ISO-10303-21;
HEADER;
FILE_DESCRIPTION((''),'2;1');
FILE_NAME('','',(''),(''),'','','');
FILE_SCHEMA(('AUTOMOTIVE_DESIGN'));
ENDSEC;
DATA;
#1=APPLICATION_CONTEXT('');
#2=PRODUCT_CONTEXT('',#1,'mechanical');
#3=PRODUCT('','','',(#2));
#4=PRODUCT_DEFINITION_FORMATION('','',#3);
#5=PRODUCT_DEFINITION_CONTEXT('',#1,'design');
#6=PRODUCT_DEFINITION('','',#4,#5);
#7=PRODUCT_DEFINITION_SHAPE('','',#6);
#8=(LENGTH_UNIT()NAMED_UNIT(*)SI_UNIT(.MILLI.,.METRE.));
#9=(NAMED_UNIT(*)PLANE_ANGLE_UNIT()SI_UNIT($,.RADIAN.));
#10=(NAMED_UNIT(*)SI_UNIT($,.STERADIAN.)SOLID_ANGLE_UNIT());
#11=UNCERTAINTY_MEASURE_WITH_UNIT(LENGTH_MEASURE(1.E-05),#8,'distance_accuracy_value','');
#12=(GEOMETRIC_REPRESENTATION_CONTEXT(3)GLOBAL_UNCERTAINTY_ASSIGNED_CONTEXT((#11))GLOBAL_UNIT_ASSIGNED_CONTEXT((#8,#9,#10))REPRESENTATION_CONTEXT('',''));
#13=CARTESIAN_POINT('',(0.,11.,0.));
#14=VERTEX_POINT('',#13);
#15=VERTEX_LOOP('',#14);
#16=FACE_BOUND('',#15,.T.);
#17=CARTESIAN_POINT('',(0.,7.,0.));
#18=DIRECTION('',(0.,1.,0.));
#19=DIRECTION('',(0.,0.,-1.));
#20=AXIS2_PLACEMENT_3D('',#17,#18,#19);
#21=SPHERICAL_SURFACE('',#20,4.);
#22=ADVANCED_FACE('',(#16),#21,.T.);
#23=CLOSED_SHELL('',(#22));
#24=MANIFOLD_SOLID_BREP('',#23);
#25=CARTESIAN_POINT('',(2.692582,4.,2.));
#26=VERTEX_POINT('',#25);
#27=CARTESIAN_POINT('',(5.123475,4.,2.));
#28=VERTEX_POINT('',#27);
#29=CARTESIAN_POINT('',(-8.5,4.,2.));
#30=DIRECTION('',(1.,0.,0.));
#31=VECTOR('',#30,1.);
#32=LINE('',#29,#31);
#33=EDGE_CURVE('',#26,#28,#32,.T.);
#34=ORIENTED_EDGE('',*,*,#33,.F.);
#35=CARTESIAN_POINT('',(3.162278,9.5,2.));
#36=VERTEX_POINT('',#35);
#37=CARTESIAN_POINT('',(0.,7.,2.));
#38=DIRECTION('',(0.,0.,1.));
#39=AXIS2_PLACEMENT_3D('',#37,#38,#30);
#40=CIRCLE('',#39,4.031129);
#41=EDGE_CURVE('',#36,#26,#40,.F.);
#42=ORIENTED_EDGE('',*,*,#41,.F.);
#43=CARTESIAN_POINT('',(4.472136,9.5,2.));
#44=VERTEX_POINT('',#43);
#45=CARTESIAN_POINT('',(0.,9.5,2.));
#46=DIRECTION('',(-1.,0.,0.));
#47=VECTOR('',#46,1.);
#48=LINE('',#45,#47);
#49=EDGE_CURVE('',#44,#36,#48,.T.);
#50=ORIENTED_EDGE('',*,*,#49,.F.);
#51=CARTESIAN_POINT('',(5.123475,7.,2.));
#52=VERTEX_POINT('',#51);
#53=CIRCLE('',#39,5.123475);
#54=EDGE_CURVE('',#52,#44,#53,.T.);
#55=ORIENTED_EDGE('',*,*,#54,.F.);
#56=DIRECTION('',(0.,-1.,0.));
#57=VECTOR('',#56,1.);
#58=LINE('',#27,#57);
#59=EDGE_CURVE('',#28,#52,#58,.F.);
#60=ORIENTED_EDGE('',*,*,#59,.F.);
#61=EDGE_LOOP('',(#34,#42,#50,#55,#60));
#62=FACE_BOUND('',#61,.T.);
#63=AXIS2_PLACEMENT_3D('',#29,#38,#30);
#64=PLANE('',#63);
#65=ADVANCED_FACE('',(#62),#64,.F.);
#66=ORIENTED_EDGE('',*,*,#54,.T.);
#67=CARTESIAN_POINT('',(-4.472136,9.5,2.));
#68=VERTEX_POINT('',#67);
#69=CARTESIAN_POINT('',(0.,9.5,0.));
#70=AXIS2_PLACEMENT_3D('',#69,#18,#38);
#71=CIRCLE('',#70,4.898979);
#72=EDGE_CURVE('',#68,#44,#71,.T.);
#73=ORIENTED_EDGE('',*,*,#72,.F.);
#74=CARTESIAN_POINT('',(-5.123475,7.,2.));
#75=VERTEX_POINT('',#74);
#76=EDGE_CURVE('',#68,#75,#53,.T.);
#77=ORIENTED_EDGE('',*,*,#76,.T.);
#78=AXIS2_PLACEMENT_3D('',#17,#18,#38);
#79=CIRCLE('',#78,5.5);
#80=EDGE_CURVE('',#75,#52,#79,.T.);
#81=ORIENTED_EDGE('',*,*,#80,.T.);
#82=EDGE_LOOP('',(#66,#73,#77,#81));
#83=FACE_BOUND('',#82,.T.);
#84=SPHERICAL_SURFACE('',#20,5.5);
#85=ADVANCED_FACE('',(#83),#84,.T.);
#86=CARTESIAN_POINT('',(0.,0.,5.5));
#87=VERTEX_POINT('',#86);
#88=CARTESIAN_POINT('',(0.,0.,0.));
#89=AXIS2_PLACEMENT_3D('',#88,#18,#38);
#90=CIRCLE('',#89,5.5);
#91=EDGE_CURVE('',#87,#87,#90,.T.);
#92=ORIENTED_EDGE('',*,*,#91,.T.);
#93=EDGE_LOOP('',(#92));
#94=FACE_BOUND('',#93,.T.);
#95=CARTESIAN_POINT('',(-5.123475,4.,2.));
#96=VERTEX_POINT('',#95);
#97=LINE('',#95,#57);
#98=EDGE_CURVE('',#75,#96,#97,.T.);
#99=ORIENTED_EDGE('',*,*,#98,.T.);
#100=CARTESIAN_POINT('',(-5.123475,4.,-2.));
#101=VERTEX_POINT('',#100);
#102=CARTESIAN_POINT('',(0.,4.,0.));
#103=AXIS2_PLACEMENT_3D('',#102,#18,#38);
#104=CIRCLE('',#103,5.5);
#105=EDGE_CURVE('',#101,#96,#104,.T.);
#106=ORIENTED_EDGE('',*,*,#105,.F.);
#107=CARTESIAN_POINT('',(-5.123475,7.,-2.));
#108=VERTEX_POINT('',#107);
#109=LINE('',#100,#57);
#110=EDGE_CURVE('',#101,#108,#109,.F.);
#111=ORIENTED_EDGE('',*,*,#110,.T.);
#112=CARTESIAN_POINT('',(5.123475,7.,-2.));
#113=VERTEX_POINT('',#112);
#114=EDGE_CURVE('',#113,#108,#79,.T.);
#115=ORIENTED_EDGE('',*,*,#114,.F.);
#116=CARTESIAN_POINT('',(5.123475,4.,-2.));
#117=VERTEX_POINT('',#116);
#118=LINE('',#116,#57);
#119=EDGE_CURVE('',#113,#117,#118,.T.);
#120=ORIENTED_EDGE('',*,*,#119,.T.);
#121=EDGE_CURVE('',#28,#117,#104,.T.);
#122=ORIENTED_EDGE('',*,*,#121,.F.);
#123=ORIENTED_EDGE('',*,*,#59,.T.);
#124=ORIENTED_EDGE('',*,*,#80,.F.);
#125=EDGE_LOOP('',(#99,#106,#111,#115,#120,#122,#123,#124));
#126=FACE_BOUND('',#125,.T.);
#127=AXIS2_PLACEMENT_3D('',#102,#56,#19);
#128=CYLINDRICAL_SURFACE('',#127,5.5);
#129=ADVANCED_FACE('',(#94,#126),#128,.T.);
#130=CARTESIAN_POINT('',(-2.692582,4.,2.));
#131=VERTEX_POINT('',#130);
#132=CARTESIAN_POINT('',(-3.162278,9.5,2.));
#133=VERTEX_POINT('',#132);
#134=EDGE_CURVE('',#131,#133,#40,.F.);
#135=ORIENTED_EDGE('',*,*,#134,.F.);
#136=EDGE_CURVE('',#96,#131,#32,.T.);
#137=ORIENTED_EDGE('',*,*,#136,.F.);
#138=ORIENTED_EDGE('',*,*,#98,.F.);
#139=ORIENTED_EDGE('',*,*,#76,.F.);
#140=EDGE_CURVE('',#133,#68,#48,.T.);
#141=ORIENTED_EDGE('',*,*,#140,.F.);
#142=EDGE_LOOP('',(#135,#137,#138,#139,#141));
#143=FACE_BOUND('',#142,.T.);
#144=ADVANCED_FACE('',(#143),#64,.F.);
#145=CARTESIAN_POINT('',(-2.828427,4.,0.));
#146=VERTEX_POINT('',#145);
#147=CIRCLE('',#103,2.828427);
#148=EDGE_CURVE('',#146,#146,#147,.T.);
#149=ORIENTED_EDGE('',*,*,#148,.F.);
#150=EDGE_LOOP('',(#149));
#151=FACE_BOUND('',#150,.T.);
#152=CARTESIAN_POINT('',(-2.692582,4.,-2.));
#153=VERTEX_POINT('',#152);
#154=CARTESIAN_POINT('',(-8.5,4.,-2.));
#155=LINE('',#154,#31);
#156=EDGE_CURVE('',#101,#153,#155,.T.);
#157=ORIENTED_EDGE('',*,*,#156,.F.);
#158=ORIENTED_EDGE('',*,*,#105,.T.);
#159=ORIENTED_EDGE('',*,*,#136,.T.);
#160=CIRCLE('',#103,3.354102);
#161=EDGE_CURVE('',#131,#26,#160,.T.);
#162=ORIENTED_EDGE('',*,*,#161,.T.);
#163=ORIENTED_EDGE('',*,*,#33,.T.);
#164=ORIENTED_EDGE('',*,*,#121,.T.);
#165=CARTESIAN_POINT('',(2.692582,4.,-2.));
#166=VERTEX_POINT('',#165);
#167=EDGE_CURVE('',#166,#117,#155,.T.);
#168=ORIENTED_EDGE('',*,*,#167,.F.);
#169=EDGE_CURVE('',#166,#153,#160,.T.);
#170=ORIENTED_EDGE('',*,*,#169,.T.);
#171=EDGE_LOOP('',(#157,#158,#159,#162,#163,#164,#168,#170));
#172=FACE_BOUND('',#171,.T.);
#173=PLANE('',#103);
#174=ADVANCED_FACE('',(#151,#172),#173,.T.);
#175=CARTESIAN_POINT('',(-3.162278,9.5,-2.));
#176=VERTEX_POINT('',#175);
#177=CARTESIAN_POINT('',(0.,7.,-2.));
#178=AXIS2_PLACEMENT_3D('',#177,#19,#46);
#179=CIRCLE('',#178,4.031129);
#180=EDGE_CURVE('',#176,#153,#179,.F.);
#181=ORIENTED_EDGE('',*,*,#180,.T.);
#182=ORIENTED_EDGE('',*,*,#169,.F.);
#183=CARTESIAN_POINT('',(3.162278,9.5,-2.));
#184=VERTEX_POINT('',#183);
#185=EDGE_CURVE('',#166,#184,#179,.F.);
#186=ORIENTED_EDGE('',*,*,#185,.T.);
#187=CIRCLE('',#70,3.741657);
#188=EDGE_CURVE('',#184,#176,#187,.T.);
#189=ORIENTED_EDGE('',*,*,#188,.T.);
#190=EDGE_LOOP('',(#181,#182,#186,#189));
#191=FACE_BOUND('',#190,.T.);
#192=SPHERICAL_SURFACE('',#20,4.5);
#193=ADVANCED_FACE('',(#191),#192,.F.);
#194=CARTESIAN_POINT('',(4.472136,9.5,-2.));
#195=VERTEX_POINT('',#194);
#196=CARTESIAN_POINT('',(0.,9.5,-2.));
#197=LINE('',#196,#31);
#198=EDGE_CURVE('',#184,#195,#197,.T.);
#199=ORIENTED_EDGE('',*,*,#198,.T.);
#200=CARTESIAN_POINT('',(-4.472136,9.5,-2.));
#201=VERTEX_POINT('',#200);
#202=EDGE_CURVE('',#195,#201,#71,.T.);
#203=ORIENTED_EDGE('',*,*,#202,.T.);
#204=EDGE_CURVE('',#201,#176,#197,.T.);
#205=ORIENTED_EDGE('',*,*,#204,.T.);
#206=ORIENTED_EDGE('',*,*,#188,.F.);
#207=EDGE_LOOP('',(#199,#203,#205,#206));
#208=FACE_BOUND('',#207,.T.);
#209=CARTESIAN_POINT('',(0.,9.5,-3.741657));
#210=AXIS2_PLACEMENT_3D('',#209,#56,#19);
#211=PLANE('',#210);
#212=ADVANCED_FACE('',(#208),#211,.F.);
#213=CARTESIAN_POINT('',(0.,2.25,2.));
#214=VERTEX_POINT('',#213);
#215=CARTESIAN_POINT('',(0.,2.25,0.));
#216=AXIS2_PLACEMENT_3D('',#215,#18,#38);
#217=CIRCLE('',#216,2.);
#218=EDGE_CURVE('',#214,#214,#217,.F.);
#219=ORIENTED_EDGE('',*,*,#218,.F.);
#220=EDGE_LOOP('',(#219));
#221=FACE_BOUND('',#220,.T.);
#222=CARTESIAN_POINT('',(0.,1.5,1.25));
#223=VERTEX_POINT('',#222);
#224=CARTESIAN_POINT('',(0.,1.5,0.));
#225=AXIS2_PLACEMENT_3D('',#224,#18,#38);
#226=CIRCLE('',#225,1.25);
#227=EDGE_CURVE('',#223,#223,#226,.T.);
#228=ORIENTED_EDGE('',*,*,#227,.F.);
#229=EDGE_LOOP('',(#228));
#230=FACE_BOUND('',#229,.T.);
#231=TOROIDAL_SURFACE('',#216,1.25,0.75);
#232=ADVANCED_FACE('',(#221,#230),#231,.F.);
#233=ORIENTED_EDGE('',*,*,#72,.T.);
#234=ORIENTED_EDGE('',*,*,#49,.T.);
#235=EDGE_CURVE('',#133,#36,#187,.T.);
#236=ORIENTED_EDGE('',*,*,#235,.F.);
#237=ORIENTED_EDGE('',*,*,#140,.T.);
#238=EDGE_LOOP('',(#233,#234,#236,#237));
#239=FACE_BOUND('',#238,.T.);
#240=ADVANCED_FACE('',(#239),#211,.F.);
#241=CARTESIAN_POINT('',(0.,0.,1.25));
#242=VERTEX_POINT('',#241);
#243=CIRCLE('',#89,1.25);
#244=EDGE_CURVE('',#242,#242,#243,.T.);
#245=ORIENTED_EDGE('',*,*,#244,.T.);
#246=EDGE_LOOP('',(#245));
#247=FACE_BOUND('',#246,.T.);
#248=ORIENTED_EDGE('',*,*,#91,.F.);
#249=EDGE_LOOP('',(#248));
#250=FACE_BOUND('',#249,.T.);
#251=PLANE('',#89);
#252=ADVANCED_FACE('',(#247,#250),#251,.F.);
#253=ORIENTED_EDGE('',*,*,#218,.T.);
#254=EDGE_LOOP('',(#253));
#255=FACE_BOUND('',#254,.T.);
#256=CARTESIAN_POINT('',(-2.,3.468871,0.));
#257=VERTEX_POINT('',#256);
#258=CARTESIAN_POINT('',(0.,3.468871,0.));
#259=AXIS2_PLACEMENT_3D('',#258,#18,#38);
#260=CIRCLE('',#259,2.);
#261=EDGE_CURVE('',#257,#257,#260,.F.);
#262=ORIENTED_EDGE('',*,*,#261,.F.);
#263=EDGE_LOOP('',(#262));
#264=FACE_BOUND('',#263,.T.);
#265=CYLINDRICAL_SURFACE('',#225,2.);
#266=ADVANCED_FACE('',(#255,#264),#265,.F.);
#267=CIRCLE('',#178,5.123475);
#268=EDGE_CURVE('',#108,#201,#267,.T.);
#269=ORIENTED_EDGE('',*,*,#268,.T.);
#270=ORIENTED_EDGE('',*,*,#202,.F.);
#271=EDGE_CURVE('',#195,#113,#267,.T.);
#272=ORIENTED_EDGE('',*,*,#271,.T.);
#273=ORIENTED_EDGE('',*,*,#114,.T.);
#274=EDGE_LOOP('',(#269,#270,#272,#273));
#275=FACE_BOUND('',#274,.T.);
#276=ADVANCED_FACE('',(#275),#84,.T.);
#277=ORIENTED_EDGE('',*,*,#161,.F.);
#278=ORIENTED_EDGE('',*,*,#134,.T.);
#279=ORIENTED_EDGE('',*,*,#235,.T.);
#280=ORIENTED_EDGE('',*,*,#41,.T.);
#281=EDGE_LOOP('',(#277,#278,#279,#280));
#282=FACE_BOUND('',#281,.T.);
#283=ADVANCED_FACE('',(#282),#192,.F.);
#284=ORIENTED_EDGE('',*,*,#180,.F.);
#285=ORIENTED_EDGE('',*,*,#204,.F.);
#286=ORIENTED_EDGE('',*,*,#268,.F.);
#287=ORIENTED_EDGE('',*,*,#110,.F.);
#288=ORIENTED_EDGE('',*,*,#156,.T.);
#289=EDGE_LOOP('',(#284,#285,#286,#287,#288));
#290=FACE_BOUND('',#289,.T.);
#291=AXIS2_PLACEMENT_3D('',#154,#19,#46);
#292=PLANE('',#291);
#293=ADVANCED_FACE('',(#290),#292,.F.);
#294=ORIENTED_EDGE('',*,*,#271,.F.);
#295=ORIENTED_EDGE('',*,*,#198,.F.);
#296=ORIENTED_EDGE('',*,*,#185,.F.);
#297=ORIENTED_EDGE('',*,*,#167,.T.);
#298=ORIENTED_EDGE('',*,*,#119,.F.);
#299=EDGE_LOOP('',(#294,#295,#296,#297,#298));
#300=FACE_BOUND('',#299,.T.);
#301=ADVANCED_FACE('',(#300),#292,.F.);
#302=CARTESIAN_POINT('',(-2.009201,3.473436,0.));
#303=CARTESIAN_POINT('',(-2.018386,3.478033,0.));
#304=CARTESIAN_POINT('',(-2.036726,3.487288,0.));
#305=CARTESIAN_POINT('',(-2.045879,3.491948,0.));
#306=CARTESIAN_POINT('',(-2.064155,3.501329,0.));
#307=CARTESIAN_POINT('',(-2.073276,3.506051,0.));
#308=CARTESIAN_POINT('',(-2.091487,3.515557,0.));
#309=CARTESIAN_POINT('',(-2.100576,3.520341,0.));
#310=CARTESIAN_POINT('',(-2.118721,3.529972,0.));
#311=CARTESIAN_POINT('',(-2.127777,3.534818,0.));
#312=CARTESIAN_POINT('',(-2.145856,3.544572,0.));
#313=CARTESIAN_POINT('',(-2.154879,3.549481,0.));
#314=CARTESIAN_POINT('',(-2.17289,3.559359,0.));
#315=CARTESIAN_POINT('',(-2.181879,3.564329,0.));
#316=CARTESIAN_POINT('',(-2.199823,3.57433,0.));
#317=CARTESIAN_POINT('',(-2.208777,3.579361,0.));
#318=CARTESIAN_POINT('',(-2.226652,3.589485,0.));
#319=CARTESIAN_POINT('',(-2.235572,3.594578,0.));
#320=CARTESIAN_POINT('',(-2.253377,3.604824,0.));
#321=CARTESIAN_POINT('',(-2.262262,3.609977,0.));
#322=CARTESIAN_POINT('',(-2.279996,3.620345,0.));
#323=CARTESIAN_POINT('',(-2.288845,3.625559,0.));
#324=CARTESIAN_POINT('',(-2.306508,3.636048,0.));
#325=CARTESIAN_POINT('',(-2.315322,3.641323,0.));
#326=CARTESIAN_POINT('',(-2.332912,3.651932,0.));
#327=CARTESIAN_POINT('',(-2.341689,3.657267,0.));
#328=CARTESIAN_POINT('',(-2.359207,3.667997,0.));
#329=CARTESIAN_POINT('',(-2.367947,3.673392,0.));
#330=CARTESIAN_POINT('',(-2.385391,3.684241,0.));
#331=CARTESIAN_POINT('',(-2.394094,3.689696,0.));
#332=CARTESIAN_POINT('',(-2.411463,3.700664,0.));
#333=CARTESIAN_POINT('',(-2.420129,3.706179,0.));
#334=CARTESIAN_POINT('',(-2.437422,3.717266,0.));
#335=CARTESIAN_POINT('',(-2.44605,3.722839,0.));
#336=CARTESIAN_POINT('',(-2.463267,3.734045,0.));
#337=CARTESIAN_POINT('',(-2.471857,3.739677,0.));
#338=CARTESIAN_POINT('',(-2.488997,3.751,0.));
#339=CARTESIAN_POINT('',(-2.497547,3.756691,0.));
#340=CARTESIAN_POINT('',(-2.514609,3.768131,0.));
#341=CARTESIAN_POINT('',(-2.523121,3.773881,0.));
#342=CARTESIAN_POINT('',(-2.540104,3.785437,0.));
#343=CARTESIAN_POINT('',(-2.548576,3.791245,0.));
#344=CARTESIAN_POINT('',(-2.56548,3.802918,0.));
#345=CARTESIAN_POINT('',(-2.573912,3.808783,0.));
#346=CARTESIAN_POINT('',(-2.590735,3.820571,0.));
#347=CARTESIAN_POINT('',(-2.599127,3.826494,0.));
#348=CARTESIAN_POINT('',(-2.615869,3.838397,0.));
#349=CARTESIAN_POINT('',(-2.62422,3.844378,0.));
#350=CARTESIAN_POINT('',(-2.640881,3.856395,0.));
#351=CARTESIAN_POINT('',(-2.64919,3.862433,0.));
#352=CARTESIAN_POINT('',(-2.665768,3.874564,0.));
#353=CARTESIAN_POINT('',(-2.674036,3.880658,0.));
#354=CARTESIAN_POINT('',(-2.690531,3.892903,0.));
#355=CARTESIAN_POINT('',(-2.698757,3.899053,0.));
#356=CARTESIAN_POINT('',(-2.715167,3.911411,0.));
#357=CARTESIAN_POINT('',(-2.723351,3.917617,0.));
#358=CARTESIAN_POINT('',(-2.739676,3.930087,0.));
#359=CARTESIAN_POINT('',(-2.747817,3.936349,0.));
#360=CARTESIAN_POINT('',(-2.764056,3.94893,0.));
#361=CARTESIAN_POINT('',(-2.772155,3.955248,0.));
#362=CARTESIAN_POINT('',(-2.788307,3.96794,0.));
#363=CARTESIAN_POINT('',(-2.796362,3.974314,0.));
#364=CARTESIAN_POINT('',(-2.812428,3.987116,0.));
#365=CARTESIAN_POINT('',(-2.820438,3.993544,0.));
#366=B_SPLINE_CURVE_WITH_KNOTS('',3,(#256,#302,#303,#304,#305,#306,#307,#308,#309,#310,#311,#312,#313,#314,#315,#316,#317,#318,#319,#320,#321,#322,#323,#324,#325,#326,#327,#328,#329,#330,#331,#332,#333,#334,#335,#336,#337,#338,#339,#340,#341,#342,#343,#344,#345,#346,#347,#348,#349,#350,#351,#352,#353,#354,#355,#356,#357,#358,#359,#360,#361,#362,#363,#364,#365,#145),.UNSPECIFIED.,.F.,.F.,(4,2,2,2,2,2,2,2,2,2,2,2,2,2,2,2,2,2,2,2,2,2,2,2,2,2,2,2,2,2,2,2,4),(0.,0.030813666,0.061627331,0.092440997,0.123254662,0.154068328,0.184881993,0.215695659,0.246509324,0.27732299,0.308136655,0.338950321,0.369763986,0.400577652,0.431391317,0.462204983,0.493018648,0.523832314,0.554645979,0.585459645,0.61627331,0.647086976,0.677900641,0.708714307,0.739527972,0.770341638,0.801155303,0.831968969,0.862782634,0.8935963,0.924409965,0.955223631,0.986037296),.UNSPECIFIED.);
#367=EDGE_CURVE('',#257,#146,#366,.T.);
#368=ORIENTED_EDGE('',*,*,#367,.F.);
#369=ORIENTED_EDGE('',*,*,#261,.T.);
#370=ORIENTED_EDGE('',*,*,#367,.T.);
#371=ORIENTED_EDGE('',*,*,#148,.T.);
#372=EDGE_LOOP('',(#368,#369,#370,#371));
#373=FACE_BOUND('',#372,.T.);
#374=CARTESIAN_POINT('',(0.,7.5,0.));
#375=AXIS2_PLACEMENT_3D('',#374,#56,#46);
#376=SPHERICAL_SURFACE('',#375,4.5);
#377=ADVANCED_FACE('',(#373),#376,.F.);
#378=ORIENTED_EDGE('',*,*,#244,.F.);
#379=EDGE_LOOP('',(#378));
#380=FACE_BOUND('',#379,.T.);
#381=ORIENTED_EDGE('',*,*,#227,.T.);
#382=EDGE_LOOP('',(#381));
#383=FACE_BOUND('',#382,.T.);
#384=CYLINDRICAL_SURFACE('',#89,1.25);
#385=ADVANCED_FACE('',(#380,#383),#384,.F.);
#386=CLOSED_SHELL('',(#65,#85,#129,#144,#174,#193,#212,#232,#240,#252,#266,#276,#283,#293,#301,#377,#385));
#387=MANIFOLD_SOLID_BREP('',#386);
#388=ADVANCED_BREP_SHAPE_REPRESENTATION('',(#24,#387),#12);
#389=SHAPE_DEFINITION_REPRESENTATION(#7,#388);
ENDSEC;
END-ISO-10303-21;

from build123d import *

# Parameters (mm, degrees)
SKETCH1_R               = 1
BOSS_EXTRUDE1_DEPTH     = 4
SKETCH22_R              = 2
CUT_EXTRUDE4_DEPTH      = 2.5
SKETCH23_R              = 1.25
CUT_EXTRUDE5_DEPTH      = 11.428326807
FILLET1_R               = 0.75
CUT_EXTRUDE2_DEPTH      = 14.883443377
CUT_EXTRUDE2_DEPTH_BACK = 14.883443377
SKETCH20_W              = 4
SKETCH20_H              = 5.5
SKETCH21_OUTSIDE_W      = 23.608
SKETCH21_OUTSIDE_H      = 17.608
SKETCH21_OUTSIDE_R      = 5.5
CUT_EXTRUDE3_DEPTH      = 15.949916388


with BuildPart() as part:
    # Sketch1 → Boss-Extrude1 (new body)
    with BuildSketch(Plane(origin=(0, 0, 0), x_dir=(1, 0, 0), z_dir=(0, 1, 0))):
        with BuildLine():
            ThreePointArc((-4.437059837, -3.25), (0, -5.5), (4.437059837, -3.25))
            ThreePointArc((4.437059837, -3.25), (5.343838437, -2.419215147), (6.5, -2))
            ThreePointArc((6.5, -2), (8.5, 0), (6.5, 2))
            ThreePointArc((6.5, 2), (5.343838437, 2.419215147), (4.437059837, 3.25))
            ThreePointArc((4.437059837, 3.25), (0, 5.5), (-4.437059837, 3.25))
            ThreePointArc((-4.437059837, 3.25), (-5.343838437, 2.419215147), (-6.5, 2))
            ThreePointArc((-6.5, 2), (-8.5, 0), (-6.5, -2))
            ThreePointArc((-6.5, -2), (-5.343838437, -2.419215147), (-4.437059837, -3.25))
        make_face()
        with Locations(Location((-6.5, 0, 0), (0, 0, 270))):
            Circle(SKETCH1_R, mode=Mode.SUBTRACT)
        with Locations(Location((6.5, 0, 0), (0, 0, 270))):
            Circle(SKETCH1_R, mode=Mode.SUBTRACT)
    extrude(amount=BOSS_EXTRUDE1_DEPTH)

    # Sketch10 → Cut-Revolve2 (revolve, cut)
    with BuildSketch(Plane.XY):
        with BuildLine():
            Line((0, 3), (0, 12))
            ThreePointArc((0, 12), (4.5, 7.5), (0, 3))
        make_face()
    revolve(axis=Axis((0, 3, 0), (0, 1, 0)), mode=Mode.SUBTRACT)

    # Sketch22 → Cut-Extrude4 (cut)
    with BuildSketch(Plane(origin=(0, 4, 0), x_dir=(1, 0, 0), z_dir=(0, 1, 0))):
        with Locations(Location((0, 0, 0), (0, 0, 270))):
            Circle(SKETCH22_R)
    extrude(amount=-CUT_EXTRUDE4_DEPTH, mode=Mode.SUBTRACT)

    # Sketch23 → Cut-Extrude5 (cut, through all)
    with BuildSketch(Plane(origin=(0, 1.5, 0), x_dir=(1, 0, 0), z_dir=(0, 1, 0))):
        with Locations(Location((0, 0, 0), (0, 0, 270))):
            Circle(SKETCH23_R)
    extrude(amount=-CUT_EXTRUDE5_DEPTH, mode=Mode.SUBTRACT)

    # Fillet1
    fillet1_edges = [part.edges().sort_by_distance(p)[0] for p in [
        (0, 1.5, -2),
    ]]
    fillet(fillet1_edges, radius=FILLET1_R - 0.0001)  # a hair under: the kernel refuses the full size

    # Sketch19 → Revolve6 (revolve)
    with BuildSketch(Plane(origin=(0, 0, 0), x_dir=(0, 0, -1), z_dir=(1, 0, 0)), mode=Mode.PRIVATE) as revolve6_sk:
        with BuildLine():
            Line((5.5, 7), (5.5, 4))
            Line((5.5, 4), (3.354101966, 4))
            ThreePointArc((3.354101966, 4), (4.48886959, 6.683693501), (3.741657387, 9.5))
            Line((3.741657387, 9.5), (4.898979486, 9.5))
            ThreePointArc((4.898979486, 9.5), (5.347634392, 8.285615189), (5.5, 7))
        make_face()
    revolve(revolve6_sk.sketch.rotate(Axis((0, 11, 0), (0, -1, 0)), 180), axis=Axis((0, 11, 0), (0, -1, 0)))

    # Sketch20 → Cut-Extrude2 (cut, two sides: drawn at the far end of the back side and taken through both)
    with BuildSketch(Plane(origin=(0, 0, 0), x_dir=(0, 0, -1), z_dir=(1, 0, 0)).offset(-CUT_EXTRUDE2_DEPTH_BACK)):
        with Locations((0, 6.75)):
            Rectangle(SKETCH20_W, SKETCH20_H)
    extrude(amount=CUT_EXTRUDE2_DEPTH + CUT_EXTRUDE2_DEPTH_BACK, mode=Mode.SUBTRACT)

    # Sketch21 outside → Cut-Extrude3 (cut, through all)
    with BuildSketch(Plane.XZ):
        Rectangle(SKETCH21_OUTSIDE_W, SKETCH21_OUTSIDE_H)
        with Locations(Location((0, 0, 0), (0, 0, 338.676313737))):
            Circle(SKETCH21_OUTSIDE_R, mode=Mode.SUBTRACT)
    extrude(amount=-CUT_EXTRUDE3_DEPTH, mode=Mode.SUBTRACT)


with BuildPart() as body_2:
    # Sketch18 → Revolve7 (revolve)
    with BuildSketch(Plane(origin=(0, 0, 0), x_dir=(0, 0, -1), z_dir=(1, 0, 0))):
        with BuildLine():
            Line((0, 11), (0, 3))
            ThreePointArc((0, 3), (4, 7), (0, 11))
        make_face()
    revolve(axis=Axis((0, 11, 0), (0, -1, 0)))


solid = Compound([part.part, body_2.part])
